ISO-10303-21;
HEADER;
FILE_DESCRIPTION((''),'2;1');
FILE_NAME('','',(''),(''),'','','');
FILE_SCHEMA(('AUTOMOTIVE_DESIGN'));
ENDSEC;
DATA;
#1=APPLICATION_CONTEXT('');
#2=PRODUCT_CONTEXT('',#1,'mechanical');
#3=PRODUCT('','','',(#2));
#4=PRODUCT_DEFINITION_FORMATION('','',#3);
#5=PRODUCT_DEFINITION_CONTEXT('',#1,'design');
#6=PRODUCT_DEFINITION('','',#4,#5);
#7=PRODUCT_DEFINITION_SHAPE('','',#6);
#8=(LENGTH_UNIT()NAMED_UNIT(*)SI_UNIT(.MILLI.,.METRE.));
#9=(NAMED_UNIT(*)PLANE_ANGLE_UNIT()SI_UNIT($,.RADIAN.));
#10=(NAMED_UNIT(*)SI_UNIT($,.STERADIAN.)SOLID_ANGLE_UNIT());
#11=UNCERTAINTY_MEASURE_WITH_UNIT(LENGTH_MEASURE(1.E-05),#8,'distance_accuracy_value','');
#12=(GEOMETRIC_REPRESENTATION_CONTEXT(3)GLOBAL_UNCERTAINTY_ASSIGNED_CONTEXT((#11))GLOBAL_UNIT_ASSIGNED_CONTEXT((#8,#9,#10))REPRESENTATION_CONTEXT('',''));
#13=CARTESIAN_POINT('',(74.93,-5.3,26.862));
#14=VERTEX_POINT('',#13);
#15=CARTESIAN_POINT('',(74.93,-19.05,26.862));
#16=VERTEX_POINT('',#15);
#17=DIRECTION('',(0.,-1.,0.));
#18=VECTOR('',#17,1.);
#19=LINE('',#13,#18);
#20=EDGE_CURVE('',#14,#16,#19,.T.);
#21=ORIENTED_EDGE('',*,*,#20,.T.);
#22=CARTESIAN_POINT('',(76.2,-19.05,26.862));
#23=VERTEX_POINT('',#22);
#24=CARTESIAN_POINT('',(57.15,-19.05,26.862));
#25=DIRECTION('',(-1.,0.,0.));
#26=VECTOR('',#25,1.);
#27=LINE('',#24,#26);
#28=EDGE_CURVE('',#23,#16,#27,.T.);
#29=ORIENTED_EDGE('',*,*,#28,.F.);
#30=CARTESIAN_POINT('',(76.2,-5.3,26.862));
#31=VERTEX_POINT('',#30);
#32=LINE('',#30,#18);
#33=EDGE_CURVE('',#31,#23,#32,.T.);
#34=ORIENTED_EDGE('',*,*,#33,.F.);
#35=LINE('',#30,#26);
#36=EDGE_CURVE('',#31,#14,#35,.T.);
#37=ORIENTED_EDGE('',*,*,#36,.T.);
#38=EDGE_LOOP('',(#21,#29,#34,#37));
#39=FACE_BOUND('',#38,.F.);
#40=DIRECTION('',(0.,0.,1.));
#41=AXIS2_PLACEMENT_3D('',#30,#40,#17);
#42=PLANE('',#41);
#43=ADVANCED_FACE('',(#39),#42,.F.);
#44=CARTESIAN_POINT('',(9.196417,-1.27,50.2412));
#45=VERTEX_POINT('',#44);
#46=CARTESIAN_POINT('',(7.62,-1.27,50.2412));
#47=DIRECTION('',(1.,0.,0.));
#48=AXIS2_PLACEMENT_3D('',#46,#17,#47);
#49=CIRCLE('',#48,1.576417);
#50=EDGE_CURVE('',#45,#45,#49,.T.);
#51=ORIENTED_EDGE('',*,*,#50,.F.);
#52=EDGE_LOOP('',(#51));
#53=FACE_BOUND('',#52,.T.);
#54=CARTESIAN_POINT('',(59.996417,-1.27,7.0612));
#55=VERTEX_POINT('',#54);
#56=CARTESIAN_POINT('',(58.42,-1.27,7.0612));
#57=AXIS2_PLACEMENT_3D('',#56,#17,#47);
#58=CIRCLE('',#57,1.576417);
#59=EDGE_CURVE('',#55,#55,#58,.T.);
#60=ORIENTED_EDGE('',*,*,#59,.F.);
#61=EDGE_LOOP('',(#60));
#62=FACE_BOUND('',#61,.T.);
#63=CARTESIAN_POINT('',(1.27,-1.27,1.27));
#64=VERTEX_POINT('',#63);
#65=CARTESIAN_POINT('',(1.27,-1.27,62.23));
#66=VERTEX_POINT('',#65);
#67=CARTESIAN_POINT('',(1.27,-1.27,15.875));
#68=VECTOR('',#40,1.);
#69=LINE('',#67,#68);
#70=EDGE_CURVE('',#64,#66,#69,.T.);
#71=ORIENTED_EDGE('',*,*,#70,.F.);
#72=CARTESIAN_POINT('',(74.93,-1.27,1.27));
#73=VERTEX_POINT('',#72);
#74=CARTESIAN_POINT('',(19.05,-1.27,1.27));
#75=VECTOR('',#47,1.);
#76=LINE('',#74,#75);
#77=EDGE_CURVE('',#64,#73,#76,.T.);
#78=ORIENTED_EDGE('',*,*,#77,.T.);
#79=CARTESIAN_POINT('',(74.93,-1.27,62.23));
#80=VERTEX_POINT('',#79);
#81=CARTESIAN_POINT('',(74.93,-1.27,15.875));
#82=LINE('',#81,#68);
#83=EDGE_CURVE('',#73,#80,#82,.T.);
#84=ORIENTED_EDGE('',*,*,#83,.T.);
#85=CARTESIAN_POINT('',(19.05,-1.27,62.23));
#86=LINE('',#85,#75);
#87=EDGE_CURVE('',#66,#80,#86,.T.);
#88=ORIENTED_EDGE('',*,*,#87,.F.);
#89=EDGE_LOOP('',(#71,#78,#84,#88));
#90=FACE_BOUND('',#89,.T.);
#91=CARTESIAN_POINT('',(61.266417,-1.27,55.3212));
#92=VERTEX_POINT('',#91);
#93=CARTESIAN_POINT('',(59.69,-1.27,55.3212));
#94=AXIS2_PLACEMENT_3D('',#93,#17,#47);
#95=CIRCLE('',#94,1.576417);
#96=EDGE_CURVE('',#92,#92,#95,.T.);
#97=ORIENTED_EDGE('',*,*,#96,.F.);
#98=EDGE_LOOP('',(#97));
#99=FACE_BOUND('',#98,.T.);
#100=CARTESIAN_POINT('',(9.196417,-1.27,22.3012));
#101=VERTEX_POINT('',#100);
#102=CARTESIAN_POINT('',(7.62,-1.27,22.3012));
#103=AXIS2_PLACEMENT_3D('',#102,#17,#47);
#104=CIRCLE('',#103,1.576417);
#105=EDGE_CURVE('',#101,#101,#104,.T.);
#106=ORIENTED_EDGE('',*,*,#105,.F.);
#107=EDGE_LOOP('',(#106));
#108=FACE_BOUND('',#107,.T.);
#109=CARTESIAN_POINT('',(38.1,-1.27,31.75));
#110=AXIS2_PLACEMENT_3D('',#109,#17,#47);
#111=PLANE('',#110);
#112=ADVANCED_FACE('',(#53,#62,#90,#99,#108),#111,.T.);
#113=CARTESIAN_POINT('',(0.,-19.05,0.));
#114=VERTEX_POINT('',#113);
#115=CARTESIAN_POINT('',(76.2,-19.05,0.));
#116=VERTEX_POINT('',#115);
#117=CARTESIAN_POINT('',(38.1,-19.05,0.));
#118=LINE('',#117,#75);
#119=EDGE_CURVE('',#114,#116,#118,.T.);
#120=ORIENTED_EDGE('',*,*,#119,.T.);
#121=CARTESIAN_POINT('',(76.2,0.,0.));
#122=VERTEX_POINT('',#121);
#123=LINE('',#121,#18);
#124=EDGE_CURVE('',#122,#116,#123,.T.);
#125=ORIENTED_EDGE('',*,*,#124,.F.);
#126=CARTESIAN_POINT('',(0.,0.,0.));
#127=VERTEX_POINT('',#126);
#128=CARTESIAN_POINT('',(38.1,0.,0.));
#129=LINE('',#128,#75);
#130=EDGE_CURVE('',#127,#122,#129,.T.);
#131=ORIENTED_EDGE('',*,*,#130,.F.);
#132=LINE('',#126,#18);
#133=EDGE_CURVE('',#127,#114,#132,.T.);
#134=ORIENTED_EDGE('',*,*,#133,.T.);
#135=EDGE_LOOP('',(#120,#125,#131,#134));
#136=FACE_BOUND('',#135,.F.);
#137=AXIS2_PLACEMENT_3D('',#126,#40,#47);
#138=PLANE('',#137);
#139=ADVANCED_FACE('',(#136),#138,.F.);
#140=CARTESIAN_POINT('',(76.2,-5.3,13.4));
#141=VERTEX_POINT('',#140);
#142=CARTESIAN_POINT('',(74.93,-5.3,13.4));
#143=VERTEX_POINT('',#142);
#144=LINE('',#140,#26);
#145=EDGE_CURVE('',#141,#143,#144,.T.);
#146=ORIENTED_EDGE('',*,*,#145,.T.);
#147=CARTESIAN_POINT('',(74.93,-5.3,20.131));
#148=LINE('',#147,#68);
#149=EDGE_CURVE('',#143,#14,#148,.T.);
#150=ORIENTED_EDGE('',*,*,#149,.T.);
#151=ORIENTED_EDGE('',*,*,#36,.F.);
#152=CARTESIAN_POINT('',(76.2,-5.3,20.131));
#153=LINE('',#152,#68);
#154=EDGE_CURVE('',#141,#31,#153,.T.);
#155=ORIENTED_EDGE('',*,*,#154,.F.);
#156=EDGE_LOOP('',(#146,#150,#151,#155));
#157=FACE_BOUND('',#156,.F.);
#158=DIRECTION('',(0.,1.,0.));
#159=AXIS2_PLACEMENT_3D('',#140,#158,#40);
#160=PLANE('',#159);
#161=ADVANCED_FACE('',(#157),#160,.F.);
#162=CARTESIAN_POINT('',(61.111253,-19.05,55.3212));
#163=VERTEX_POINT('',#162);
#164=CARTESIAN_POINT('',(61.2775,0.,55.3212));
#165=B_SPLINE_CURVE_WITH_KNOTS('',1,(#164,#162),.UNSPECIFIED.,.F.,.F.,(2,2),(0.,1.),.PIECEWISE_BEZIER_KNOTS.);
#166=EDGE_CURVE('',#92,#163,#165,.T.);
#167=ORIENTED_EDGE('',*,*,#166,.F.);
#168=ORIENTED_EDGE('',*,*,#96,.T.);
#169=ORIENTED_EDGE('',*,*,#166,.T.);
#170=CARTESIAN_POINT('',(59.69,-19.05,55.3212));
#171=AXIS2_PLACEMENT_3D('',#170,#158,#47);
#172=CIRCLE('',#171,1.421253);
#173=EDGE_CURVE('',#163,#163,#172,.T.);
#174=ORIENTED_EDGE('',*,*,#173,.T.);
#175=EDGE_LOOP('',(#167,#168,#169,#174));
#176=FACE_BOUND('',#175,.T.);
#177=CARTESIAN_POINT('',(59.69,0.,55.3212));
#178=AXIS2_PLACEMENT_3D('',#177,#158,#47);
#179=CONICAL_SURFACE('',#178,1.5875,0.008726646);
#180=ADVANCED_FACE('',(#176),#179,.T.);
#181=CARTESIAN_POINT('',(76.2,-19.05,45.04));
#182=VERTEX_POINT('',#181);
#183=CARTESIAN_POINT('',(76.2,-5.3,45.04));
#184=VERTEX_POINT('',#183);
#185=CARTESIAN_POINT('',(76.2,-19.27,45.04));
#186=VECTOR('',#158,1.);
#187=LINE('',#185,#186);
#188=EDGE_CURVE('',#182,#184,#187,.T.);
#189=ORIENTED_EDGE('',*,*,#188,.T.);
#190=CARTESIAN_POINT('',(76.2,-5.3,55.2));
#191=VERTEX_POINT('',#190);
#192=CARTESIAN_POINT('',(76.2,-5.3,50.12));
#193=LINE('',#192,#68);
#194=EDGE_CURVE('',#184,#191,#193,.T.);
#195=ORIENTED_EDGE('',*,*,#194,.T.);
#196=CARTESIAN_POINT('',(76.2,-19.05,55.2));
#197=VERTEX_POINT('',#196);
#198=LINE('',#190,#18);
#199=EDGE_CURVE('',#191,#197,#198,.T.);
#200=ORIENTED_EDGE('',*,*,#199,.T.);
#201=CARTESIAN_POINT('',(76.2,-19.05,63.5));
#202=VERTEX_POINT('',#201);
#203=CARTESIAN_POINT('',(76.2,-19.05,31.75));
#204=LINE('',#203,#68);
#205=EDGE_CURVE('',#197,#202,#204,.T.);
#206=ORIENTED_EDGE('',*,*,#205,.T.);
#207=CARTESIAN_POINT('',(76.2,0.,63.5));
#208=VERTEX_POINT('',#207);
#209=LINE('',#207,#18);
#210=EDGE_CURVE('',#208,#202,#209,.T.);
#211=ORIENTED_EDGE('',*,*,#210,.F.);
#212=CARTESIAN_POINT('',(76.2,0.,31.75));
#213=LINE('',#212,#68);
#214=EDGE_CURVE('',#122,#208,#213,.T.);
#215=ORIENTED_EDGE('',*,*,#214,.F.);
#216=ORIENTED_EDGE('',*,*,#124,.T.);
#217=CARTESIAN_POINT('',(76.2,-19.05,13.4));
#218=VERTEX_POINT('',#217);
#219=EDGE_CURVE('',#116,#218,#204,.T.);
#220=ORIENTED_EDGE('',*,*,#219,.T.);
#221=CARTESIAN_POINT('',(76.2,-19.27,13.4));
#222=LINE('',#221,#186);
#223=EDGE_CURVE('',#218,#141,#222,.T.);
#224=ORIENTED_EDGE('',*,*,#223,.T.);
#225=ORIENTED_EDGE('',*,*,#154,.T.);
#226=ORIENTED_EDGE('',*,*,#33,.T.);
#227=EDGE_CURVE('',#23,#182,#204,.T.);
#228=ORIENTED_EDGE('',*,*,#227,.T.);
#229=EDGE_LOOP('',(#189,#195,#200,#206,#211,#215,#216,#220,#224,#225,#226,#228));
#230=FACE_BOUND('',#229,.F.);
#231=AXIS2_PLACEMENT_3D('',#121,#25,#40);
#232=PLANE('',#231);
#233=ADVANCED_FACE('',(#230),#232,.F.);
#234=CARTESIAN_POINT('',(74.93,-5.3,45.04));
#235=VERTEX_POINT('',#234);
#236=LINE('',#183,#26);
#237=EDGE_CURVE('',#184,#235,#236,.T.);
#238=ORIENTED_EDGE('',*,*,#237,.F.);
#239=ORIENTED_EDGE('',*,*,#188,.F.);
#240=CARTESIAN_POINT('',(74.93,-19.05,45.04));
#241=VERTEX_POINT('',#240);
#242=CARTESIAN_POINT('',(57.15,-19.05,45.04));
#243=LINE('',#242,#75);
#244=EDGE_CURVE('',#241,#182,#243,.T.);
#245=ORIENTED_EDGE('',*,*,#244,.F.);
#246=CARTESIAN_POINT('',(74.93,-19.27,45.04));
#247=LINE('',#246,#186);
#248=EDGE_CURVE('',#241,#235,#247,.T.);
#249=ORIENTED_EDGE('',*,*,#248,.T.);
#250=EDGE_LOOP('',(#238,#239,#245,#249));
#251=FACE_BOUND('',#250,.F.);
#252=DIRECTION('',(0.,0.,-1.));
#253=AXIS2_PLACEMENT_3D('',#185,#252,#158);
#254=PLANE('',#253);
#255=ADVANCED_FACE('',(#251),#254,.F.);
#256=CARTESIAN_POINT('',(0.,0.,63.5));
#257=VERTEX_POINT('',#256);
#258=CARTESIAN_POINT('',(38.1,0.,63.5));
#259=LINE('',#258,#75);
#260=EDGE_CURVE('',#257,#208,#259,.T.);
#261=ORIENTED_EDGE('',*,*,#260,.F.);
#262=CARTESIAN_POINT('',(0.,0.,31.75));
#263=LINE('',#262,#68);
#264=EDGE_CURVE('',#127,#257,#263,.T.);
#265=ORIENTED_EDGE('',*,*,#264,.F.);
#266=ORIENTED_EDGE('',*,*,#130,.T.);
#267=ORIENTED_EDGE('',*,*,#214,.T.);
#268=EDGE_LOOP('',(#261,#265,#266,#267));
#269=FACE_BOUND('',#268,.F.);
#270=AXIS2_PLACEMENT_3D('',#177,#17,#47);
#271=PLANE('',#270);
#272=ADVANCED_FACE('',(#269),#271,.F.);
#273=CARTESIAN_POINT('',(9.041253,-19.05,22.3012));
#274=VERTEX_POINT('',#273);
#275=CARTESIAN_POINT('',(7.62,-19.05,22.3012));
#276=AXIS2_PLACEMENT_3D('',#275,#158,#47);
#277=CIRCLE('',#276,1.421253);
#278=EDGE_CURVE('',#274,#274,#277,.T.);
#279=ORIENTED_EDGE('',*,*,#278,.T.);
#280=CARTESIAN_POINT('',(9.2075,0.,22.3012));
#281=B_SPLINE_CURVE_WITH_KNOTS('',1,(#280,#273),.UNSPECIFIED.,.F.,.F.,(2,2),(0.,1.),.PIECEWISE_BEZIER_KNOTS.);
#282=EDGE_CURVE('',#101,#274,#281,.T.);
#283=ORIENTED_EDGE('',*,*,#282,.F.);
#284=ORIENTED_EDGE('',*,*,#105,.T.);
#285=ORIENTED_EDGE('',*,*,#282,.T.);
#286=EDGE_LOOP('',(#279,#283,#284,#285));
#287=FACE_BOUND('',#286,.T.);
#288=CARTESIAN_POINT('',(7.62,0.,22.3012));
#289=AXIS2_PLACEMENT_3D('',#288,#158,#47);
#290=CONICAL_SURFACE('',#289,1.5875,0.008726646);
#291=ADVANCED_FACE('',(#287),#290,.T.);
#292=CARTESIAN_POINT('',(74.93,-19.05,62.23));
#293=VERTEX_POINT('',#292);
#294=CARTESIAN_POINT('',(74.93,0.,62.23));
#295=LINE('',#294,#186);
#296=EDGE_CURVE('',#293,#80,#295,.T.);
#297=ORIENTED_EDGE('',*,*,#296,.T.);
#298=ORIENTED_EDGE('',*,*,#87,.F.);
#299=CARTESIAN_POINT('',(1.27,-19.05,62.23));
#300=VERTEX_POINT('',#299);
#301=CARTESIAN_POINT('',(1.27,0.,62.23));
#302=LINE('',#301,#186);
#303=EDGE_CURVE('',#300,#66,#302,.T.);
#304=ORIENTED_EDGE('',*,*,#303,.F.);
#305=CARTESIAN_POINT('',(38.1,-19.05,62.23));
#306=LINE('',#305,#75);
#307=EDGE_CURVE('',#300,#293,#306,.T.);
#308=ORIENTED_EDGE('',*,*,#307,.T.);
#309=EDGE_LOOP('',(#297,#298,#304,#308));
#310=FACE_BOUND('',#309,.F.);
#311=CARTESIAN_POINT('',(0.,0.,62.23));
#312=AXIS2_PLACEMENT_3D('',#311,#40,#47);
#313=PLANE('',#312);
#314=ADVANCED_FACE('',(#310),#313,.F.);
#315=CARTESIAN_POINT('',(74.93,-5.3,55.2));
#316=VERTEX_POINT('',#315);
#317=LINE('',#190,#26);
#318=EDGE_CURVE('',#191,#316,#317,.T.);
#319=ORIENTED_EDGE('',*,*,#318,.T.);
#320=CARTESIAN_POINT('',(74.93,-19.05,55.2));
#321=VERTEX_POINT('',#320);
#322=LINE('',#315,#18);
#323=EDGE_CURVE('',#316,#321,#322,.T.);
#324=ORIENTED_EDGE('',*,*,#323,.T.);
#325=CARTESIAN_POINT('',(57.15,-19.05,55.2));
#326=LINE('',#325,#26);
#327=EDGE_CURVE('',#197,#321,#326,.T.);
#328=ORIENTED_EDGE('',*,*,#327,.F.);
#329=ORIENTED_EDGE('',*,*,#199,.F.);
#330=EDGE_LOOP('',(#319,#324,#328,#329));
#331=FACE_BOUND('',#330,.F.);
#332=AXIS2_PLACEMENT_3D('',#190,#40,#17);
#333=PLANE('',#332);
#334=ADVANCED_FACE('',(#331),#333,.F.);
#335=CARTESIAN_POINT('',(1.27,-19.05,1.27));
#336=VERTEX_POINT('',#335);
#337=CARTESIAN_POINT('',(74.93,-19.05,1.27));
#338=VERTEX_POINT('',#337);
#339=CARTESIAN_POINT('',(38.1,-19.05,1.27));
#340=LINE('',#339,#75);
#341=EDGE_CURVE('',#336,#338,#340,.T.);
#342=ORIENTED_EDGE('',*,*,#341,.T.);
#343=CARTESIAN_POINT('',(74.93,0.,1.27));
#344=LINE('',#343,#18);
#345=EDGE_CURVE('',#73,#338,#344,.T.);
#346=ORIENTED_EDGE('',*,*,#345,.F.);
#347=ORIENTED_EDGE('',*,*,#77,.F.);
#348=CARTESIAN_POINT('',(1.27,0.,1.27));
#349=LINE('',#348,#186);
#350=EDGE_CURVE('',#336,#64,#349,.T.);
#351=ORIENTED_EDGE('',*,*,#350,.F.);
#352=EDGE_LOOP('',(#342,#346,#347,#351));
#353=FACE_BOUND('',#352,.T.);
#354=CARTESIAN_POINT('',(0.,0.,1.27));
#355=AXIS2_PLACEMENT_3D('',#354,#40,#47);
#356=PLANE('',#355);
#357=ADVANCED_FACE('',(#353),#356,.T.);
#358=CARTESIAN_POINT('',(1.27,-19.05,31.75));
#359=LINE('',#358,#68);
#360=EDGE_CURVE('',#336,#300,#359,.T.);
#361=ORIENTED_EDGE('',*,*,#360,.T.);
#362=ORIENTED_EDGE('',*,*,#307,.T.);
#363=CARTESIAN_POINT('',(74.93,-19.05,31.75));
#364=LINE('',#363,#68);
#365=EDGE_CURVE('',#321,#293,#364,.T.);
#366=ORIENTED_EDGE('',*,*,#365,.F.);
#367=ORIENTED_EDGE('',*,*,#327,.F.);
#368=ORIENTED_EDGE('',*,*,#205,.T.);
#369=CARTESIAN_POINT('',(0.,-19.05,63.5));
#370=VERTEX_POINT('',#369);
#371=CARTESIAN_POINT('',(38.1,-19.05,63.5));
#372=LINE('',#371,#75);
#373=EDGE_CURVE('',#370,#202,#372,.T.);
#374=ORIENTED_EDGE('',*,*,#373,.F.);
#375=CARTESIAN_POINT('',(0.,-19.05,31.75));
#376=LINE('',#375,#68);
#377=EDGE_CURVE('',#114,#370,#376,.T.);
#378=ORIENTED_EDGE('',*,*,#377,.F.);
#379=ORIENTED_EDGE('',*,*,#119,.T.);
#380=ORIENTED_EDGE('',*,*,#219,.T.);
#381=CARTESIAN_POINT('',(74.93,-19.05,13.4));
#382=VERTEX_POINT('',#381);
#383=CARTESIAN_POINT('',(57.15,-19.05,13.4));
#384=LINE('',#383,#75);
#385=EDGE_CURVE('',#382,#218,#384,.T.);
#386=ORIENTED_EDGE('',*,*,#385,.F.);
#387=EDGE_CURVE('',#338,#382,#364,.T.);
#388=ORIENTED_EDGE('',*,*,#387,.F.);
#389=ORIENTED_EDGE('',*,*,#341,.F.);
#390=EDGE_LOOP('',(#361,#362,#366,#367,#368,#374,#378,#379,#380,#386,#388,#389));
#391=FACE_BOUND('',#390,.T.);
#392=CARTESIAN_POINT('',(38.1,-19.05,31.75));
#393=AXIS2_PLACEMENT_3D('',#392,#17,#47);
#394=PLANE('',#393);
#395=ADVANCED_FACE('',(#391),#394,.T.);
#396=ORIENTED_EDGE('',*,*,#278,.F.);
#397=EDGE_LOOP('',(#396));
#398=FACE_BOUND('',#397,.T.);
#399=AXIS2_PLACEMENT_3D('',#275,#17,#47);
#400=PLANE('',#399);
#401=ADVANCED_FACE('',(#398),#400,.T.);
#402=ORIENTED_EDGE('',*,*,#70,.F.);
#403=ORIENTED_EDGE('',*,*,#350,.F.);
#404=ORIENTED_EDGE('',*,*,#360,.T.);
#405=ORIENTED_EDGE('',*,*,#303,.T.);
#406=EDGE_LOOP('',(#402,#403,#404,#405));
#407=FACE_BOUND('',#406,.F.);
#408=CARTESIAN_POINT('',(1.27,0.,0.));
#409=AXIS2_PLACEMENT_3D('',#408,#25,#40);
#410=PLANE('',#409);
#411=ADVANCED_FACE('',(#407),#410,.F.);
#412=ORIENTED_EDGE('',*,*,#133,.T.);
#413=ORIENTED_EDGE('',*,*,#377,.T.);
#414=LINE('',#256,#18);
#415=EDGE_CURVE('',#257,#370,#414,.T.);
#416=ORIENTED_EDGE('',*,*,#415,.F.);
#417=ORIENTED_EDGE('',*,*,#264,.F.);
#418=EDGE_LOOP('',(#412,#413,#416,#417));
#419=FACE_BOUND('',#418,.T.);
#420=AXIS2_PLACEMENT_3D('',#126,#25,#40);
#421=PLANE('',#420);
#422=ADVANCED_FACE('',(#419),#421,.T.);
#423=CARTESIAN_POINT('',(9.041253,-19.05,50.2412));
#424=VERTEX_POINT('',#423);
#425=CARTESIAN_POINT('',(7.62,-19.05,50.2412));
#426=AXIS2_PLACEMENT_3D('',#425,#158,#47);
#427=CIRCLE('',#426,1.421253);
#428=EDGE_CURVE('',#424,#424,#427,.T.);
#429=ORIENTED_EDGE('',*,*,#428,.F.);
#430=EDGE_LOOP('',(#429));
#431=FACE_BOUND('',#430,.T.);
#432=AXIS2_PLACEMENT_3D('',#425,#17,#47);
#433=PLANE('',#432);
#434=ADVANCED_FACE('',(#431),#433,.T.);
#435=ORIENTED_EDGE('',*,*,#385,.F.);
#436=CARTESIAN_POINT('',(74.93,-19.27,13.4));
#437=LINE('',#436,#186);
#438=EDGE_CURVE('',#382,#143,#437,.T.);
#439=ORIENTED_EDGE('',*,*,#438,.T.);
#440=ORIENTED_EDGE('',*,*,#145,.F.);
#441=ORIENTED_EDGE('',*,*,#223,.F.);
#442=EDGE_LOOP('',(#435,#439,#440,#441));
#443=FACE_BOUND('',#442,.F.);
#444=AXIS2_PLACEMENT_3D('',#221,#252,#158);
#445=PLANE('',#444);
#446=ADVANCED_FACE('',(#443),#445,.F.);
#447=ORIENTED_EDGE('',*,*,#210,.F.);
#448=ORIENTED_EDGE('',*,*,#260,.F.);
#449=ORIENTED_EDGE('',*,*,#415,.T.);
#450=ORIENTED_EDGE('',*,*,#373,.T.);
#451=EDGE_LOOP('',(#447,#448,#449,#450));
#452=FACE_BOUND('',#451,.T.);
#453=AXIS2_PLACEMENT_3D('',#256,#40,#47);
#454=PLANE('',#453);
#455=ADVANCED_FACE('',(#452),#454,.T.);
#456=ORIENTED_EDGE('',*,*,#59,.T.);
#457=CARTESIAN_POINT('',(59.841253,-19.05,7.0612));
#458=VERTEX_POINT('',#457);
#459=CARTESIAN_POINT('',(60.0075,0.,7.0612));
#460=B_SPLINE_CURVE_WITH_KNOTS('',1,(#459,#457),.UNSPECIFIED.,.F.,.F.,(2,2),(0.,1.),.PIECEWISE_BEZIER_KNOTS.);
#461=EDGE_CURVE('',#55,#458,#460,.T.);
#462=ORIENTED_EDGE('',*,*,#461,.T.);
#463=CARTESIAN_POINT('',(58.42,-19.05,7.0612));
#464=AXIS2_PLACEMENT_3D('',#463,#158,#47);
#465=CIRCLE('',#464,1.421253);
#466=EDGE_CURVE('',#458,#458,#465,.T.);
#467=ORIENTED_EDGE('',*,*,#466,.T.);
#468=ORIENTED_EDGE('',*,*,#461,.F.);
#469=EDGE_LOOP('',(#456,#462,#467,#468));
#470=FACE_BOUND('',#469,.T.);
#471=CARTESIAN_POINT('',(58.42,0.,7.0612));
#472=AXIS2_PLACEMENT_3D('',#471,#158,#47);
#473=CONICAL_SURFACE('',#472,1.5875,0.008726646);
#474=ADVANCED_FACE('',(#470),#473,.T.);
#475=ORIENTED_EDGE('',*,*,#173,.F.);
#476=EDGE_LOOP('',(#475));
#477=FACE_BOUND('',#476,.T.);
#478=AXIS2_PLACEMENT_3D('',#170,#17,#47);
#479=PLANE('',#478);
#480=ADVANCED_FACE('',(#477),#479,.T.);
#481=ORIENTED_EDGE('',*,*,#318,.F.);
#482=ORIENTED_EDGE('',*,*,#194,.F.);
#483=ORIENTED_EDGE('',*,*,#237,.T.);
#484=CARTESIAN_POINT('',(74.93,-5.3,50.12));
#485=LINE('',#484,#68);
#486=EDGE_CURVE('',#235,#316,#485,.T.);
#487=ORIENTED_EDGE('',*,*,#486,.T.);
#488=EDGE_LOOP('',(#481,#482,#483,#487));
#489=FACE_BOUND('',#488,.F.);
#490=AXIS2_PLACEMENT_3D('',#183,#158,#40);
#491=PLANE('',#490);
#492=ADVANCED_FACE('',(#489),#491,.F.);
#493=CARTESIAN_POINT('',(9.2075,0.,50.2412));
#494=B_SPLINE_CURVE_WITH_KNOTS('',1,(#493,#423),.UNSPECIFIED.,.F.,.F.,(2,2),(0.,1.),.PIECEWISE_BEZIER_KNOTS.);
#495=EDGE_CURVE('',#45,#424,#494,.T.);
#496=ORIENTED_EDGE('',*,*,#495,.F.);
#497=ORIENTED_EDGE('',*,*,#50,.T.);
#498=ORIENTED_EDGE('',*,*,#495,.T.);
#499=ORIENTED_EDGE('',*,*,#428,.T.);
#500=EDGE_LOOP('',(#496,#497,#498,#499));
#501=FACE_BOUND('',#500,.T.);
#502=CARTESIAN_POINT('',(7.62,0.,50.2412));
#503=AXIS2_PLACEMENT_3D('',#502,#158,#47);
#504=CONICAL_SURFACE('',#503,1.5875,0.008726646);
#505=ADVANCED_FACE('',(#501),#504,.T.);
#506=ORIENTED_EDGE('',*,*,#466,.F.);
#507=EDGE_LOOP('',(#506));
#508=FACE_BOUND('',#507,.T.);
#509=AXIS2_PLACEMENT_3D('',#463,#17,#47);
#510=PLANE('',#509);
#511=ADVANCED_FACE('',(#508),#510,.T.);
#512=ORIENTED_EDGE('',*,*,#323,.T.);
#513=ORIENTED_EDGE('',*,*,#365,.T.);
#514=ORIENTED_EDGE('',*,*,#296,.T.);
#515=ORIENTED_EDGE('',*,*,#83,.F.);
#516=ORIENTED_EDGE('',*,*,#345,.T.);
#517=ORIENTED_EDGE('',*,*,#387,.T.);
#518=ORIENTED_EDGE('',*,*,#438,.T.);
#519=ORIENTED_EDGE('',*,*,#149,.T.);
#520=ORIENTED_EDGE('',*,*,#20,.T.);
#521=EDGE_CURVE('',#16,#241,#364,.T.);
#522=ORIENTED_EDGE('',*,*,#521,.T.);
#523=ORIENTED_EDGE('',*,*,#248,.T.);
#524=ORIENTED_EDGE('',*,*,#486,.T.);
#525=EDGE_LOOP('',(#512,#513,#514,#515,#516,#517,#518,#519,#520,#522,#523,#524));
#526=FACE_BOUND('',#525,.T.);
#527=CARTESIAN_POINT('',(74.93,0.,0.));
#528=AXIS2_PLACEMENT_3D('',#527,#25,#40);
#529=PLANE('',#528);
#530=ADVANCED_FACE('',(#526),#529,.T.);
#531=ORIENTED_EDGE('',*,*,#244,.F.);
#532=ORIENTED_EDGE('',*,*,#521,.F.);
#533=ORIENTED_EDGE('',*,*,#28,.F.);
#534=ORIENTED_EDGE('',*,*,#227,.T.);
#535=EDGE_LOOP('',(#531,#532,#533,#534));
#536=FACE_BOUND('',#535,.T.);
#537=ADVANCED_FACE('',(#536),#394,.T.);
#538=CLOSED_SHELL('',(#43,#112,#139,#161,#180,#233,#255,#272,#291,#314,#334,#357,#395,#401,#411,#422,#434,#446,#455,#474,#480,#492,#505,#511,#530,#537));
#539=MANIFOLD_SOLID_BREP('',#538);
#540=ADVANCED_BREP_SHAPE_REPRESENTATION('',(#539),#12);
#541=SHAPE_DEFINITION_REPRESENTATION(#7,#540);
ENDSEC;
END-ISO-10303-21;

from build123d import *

# Parameters (mm, degrees)
F0_W     = 76.2
F0_H     = 63.5
F1_DEPTH = 19.05
F3_T     = -1.27
F2_R     = 1.5875
F4_DEPTH = 19.05
F4_TAPER = 0.5
F5_W     = 0.22
F5_H     = 10.16
F5_W_2   = 13.75
F5_H_2   = 13.462
F6_DEPTH = 1.27


# Not quite as in the source:
# - a feature names something its author has since deleted; it is built from what else it names


with BuildPart() as f1:
    # F0 (on Front) → F1 (new body)
    with BuildSketch(Plane.XZ):
        with Locations((38.1, 31.75)):
            Rectangle(F0_W, F0_H)
    extrude(amount=F1_DEPTH)

    # F3
    f3_openings = [f1.faces().sort_by_distance(p)[0] for p in [
        (38.1, -19.05, 31.75),
    ]]
    offset(amount=F3_T, openings=f3_openings)

    # F2 (on face) → F4 (join)
    with BuildSketch(Plane.XZ):
        with Locations((59.69, 55.3212)):
            Circle(F2_R)
        with Locations((7.62, 50.2412)):
            Circle(F2_R)
        with Locations((7.62, 22.3012)):
            Circle(F2_R)
        with Locations((58.42, 7.0612)):
            Circle(F2_R)
    extrude(amount=F4_DEPTH, taper=F4_TAPER)

    # F5 (on face) → F6 (cut)
    with BuildSketch(Plane.YZ.offset(76.2)):
        with Locations((-19.16, 50.12)):
            Rectangle(F5_W, F5_H)
        with Locations((-12.175, 50.12)):
            Rectangle(F5_W_2, F5_H)
        with Locations((-19.16, 20.131)):
            Rectangle(F5_W, F5_H_2)
        with Locations((-12.175, 20.131)):
            Rectangle(F5_W_2, F5_H_2)
    extrude(amount=-F6_DEPTH, mode=Mode.SUBTRACT)


solid = f1.part
